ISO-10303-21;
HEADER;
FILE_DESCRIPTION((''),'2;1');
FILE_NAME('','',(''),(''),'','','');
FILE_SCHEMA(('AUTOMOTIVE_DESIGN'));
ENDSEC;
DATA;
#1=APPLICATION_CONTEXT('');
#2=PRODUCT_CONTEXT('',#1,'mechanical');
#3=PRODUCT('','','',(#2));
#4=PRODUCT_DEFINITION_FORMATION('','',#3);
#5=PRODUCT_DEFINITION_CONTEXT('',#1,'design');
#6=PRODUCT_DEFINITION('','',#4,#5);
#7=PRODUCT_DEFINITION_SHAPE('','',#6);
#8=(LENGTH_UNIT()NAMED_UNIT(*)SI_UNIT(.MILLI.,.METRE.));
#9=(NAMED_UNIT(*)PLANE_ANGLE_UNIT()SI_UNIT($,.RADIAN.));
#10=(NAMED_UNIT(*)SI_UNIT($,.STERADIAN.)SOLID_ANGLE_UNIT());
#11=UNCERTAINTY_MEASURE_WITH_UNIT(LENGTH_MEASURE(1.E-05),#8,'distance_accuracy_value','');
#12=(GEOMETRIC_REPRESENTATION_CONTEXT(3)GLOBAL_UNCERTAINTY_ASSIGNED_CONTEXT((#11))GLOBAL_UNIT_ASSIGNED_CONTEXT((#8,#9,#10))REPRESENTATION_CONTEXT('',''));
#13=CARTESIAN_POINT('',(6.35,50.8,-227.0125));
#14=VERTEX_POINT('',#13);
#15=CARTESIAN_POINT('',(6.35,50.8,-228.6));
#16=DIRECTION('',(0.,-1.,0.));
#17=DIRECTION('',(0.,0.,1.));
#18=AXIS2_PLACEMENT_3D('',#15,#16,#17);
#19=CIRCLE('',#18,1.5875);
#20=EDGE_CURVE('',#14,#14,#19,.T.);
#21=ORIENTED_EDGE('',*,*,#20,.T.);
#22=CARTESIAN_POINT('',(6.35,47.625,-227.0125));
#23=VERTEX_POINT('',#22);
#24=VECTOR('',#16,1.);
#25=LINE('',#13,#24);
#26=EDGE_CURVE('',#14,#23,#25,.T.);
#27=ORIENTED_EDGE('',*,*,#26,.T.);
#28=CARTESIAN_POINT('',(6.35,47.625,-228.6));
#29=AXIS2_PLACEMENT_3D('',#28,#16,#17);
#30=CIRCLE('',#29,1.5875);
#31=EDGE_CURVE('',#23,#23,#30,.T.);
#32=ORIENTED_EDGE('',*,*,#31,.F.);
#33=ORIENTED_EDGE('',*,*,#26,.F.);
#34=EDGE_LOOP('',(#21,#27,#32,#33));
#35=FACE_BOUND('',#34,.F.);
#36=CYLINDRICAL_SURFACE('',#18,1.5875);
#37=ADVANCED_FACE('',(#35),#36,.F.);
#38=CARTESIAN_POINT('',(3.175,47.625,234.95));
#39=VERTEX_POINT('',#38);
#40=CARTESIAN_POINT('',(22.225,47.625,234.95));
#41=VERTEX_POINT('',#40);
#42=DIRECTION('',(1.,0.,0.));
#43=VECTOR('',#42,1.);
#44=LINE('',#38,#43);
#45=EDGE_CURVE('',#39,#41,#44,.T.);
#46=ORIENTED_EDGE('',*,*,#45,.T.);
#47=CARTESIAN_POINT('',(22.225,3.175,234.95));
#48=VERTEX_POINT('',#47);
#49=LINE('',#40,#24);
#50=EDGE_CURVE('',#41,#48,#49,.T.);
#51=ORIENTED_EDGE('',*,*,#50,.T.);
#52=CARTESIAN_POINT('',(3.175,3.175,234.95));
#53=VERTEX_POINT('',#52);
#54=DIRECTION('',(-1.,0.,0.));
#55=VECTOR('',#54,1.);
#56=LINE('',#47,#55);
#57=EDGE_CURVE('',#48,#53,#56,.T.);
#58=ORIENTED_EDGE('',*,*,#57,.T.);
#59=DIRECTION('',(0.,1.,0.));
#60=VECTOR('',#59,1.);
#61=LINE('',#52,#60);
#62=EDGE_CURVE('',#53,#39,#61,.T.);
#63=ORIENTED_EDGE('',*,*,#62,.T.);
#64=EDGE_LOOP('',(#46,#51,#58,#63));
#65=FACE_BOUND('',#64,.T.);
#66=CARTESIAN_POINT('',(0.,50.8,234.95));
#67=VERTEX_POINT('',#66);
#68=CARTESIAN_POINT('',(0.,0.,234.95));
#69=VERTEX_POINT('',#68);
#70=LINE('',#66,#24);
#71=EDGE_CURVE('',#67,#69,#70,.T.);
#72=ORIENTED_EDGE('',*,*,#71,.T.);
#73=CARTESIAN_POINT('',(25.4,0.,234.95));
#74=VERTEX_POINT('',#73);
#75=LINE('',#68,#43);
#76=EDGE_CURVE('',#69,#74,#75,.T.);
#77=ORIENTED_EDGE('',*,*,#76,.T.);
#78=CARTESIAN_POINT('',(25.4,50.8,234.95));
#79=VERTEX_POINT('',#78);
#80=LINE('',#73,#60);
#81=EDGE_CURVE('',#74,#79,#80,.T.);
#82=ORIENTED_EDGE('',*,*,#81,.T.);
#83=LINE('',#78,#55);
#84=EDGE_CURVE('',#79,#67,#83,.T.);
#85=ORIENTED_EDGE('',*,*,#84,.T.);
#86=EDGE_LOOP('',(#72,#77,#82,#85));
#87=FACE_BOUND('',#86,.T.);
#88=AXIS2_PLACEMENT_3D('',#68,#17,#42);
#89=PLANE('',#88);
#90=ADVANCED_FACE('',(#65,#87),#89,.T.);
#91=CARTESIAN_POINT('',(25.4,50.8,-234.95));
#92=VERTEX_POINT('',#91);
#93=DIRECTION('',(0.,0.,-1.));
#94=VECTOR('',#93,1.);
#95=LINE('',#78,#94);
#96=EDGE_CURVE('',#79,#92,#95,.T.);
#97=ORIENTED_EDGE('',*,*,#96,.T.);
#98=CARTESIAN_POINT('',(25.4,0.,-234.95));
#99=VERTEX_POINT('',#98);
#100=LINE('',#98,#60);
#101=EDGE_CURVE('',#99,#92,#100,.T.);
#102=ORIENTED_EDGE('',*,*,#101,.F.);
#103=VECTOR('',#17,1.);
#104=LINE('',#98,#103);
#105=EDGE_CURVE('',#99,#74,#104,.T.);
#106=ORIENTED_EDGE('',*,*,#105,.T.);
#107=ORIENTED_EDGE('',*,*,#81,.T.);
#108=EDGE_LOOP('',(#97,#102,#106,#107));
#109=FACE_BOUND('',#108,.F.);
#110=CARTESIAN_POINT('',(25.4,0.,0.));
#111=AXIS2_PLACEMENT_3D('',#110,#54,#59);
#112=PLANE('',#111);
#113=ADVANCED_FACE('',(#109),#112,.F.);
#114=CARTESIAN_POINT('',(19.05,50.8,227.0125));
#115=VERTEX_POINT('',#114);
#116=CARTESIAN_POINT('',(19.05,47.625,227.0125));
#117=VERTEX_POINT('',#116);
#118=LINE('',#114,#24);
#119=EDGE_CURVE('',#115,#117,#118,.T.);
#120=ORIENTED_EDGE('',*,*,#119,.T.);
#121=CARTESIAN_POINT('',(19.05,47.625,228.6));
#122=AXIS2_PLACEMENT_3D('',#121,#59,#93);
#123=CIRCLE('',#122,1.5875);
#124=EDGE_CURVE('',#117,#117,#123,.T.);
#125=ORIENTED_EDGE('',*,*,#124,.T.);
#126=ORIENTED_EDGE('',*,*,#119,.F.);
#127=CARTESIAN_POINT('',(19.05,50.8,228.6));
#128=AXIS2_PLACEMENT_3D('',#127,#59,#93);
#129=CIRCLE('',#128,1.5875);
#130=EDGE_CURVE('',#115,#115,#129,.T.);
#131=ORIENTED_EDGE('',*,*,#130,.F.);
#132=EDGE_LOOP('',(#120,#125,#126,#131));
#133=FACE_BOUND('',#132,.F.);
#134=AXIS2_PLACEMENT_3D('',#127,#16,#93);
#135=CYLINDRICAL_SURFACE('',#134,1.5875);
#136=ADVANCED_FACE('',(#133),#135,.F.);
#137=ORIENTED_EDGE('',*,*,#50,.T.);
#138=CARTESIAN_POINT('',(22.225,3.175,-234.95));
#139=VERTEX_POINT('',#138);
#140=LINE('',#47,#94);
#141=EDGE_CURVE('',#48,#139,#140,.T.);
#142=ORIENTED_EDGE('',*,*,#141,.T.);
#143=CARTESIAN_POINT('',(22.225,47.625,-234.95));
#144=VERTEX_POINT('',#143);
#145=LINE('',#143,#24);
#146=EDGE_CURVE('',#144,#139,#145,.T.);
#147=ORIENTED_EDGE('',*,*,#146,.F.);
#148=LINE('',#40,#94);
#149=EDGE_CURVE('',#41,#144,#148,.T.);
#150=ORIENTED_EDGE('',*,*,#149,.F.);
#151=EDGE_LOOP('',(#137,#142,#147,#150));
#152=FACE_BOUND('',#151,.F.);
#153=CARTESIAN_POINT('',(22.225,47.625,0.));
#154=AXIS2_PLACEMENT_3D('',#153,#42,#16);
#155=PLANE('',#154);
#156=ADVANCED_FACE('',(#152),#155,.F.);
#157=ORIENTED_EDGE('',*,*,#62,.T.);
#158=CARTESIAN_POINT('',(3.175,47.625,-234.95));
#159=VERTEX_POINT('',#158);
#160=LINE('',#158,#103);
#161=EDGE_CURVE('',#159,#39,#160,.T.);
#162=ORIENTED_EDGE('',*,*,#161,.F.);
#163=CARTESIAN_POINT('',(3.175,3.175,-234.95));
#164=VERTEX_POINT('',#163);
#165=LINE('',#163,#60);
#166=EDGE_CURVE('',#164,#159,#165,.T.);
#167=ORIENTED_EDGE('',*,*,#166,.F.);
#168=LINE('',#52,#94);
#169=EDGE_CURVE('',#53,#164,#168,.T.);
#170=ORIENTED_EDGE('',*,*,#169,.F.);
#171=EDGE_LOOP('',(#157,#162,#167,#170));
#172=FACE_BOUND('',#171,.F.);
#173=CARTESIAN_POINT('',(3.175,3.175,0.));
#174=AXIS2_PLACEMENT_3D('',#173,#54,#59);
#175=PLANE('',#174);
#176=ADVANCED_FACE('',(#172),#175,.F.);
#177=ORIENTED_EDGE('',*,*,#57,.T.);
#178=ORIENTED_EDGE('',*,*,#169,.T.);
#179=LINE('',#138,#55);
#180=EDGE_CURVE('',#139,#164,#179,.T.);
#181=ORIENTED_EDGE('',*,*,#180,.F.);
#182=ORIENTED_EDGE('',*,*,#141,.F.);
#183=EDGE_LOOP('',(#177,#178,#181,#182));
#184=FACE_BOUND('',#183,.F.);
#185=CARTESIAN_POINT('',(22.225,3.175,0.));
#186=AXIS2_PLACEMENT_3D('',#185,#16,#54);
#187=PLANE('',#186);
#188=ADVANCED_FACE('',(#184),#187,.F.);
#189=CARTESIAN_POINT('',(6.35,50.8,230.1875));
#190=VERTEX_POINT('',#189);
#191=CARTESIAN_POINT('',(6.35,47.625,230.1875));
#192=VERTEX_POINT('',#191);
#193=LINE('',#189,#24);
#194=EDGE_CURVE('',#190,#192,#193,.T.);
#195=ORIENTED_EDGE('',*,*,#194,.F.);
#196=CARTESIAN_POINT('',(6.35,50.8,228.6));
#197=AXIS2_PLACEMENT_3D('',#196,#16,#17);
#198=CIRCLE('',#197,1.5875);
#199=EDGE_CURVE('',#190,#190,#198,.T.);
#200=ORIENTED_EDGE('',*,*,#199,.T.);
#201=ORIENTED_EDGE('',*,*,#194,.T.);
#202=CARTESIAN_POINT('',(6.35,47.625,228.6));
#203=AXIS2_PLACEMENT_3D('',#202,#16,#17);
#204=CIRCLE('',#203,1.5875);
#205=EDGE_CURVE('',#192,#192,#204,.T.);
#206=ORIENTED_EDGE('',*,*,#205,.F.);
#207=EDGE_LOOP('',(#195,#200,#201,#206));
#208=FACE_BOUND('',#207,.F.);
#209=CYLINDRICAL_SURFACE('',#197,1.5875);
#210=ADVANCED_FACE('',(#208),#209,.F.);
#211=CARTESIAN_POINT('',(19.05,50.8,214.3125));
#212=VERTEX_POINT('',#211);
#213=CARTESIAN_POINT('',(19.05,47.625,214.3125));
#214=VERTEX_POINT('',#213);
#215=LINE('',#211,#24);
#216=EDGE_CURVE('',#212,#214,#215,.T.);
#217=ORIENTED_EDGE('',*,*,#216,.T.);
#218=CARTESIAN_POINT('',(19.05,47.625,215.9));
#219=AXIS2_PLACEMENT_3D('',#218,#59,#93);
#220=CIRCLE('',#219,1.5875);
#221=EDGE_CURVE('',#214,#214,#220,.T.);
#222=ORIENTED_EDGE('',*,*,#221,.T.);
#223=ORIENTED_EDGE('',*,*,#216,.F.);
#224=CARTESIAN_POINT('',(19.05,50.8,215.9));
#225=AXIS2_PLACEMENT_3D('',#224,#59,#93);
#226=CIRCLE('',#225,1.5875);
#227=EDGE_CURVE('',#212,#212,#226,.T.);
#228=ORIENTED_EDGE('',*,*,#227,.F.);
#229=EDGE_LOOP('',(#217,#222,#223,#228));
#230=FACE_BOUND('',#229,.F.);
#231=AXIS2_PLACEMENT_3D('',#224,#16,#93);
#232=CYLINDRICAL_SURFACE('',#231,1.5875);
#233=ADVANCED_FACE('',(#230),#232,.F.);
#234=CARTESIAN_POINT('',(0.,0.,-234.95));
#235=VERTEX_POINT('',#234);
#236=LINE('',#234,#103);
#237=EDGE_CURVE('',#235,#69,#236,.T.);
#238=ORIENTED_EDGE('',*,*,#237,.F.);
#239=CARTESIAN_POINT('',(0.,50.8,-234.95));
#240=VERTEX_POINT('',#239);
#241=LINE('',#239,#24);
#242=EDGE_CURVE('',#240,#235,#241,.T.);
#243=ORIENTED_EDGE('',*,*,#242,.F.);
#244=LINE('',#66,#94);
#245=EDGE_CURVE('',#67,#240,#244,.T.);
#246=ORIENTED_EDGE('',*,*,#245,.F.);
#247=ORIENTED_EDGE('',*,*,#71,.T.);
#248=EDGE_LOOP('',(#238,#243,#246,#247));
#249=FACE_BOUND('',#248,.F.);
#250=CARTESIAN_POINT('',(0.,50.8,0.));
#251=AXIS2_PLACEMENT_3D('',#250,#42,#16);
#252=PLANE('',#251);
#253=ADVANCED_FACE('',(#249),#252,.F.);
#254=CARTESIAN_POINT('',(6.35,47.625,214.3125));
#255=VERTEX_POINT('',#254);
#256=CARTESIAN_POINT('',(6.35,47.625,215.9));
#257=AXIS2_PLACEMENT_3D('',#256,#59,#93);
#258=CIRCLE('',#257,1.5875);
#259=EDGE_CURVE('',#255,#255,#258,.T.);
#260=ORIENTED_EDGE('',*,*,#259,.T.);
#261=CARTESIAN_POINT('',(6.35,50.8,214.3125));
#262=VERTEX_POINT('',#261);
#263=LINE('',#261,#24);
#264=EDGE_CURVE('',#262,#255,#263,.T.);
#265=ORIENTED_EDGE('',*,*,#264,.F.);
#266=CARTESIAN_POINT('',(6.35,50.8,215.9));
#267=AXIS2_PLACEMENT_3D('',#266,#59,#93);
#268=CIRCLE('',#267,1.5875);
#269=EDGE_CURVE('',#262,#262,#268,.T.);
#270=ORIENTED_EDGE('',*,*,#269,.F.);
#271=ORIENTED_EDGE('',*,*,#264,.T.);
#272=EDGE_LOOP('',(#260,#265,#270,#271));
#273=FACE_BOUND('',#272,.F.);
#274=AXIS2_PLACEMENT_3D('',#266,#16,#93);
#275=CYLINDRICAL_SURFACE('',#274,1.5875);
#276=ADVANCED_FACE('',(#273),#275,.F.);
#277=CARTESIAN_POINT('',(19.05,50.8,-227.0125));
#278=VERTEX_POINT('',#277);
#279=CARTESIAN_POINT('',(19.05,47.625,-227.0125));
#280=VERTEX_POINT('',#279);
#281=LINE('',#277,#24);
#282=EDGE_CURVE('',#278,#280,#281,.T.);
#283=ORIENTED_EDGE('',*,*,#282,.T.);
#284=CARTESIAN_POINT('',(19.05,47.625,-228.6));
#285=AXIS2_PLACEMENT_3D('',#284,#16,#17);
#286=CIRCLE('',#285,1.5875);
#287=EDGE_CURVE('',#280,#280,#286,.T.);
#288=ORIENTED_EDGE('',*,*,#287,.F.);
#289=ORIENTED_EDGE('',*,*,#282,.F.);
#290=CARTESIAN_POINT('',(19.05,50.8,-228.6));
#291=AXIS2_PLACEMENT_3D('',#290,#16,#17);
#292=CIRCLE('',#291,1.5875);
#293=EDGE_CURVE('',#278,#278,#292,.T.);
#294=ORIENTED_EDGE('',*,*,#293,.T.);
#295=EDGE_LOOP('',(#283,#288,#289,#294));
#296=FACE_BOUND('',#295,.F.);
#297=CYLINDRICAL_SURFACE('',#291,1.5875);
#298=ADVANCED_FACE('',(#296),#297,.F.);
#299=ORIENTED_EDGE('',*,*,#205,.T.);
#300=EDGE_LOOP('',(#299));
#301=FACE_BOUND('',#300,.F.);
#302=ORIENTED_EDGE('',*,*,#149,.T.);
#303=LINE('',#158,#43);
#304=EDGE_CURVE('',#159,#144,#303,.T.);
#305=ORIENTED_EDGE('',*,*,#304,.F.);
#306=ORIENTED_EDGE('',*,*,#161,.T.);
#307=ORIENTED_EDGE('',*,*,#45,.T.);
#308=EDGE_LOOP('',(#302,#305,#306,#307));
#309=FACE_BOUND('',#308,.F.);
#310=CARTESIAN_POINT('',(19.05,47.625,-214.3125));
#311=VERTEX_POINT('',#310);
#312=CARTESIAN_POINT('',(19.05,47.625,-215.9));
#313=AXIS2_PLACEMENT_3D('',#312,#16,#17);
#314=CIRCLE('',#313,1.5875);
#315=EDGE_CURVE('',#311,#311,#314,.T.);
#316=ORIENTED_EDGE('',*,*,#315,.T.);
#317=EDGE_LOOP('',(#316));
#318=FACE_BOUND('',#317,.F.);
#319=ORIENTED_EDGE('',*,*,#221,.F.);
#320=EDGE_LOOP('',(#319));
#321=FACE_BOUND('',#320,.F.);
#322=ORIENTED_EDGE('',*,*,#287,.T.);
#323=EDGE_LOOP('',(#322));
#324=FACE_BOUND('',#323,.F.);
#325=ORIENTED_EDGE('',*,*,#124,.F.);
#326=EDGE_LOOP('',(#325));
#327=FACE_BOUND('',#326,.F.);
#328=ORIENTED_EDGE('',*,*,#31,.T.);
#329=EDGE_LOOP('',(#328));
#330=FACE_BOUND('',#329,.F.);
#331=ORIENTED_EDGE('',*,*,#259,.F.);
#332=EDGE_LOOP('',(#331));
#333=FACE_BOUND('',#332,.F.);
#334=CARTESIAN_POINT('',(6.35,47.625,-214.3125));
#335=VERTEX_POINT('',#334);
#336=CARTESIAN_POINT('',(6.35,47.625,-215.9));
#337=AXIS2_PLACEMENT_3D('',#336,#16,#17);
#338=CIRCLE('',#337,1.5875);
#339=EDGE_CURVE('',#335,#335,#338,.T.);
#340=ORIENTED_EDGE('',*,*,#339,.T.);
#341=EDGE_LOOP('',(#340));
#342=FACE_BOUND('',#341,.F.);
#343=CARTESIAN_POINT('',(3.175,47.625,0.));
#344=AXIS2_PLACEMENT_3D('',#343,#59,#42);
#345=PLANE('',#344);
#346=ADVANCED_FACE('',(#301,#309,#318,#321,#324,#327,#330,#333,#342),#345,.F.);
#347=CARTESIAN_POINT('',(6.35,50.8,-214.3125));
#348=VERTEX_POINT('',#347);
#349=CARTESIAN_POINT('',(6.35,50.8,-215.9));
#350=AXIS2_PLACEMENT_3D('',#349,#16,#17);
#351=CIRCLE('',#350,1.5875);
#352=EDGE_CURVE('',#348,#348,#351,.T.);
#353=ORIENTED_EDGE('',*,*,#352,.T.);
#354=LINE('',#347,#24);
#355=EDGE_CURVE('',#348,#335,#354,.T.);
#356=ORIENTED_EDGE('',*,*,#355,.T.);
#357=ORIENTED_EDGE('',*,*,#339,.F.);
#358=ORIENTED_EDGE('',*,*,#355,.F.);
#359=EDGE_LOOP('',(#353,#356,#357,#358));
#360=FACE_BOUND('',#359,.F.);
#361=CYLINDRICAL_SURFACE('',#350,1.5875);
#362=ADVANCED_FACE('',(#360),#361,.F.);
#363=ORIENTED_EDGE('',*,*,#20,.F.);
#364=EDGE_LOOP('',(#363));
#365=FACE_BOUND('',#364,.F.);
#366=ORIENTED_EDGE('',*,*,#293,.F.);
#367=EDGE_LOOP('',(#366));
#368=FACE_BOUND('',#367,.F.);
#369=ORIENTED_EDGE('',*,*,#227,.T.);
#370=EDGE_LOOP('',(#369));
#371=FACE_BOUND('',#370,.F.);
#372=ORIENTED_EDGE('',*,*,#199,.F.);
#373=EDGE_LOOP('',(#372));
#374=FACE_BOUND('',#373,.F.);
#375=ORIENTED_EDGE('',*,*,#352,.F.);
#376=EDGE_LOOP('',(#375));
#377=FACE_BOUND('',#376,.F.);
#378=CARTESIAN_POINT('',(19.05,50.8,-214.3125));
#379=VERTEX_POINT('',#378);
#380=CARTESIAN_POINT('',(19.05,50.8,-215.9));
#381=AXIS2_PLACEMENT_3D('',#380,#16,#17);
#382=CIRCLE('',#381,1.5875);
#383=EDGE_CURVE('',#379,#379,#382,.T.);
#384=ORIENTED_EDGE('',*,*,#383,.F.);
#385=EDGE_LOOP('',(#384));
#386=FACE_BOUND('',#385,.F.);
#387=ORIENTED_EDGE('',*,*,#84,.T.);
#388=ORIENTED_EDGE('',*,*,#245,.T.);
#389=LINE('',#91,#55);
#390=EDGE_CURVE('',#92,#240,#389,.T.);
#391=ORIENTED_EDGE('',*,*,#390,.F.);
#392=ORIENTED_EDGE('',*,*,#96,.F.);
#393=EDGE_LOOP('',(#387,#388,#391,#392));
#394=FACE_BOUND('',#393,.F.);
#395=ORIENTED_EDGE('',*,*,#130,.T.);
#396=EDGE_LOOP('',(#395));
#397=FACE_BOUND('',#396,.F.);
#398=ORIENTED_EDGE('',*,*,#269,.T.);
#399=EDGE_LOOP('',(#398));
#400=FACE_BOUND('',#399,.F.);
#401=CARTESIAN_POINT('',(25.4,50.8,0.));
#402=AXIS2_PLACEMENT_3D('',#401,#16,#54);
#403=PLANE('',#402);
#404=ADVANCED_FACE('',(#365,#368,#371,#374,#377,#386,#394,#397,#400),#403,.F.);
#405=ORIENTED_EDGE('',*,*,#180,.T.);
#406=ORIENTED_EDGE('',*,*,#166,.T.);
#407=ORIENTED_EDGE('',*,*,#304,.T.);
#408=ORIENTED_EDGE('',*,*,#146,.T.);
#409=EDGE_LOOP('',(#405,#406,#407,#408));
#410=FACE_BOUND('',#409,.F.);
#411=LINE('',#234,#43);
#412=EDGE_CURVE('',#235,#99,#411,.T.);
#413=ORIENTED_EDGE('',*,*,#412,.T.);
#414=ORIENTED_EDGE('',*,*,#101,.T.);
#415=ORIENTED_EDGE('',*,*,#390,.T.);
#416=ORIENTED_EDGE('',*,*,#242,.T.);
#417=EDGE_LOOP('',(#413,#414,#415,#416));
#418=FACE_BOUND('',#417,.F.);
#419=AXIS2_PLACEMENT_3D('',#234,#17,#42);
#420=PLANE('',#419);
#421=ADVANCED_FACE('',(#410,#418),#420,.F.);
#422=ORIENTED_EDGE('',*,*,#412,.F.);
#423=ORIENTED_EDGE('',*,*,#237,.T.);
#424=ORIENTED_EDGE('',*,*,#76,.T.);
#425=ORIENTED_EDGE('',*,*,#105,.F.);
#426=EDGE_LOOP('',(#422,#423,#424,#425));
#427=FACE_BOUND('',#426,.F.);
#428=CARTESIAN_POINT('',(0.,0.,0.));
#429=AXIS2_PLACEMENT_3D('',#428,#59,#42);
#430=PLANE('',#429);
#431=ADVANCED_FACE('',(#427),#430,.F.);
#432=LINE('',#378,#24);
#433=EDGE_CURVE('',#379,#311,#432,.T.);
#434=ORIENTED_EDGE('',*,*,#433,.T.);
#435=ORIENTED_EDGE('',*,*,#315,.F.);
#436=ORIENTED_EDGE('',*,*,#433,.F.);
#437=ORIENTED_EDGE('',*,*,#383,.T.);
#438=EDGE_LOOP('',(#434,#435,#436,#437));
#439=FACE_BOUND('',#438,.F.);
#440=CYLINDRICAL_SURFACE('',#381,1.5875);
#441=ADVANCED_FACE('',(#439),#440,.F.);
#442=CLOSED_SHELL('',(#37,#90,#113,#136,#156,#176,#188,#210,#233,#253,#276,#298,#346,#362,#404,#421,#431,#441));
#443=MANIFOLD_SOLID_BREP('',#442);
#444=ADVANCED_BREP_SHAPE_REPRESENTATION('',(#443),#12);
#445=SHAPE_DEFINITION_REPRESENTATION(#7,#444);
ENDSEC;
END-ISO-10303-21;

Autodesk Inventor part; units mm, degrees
ref_plane "YZ Plane" through (0, 0, 0) normal (1, 0, 0) x (0, 1, 0)
ref_plane "XZ Plane" through (0, 0, 0) normal (0, 1, 0) x (-1, 0, 0)
ref_plane "XY Plane" through (0, 0, 0) normal (0, 0, 1) x (1, 0, 0)
sketch "Sketch1" plane through (0, 0, 0) normal (0, 0, 1) x (1, 0, 0)
  line L0 (0, 0) -> (25.4, 0)
  line L1 (25.4, 0) -> (25.4, 50.8)
  line L2 (25.4, 50.8) -> (0, 50.8)
  line L3 (0, 50.8) -> (0, 0)
  line L4 (3.175, 47.625) -> (22.225, 47.625)
  line L5 (22.225, 47.625) -> (22.225, 3.175)
  line L6 (22.225, 3.175) -> (3.175, 3.175)
  line L7 (3.175, 3.175) -> (3.175, 47.625)
  dimension "d0" = 25.4
  dimension "d1" = 50.8
  dimension "d2" = 3.175
extrude "Beam" add sketch "Sketch1" along normal mid plane 469.9
sketch "Sketch2" plane through (0, 50.8, -234.95) normal (0, 1, 0) x (1, 0, 0)
  line L0 (0, 0) -> (25.4, 0) projected
  line L1 (0, 0) -> (0, -469.9) projected
  point P0 (6.35, -6.35)
  dimension "d5" = 6.35
  dimension "d6" = 6.35
hole "Rivet Hole" at (6.35, 50.8, -228.6) direction (0, -1, 0) diameter 3.175 end up to surface
pattern_linear "Rivet Holes" count 2 spacing 12.7 along (1, 0, 0) count 2 spacing 12.7 along (0, 0, 1) of "Rivet Hole"
mirror "Rivet Holes Mirrored" about plane through (0, 0, 0) normal (0, 0, 1) of "Rivet Hole", "Rivet Holes"
properties part number "Front Beam"
